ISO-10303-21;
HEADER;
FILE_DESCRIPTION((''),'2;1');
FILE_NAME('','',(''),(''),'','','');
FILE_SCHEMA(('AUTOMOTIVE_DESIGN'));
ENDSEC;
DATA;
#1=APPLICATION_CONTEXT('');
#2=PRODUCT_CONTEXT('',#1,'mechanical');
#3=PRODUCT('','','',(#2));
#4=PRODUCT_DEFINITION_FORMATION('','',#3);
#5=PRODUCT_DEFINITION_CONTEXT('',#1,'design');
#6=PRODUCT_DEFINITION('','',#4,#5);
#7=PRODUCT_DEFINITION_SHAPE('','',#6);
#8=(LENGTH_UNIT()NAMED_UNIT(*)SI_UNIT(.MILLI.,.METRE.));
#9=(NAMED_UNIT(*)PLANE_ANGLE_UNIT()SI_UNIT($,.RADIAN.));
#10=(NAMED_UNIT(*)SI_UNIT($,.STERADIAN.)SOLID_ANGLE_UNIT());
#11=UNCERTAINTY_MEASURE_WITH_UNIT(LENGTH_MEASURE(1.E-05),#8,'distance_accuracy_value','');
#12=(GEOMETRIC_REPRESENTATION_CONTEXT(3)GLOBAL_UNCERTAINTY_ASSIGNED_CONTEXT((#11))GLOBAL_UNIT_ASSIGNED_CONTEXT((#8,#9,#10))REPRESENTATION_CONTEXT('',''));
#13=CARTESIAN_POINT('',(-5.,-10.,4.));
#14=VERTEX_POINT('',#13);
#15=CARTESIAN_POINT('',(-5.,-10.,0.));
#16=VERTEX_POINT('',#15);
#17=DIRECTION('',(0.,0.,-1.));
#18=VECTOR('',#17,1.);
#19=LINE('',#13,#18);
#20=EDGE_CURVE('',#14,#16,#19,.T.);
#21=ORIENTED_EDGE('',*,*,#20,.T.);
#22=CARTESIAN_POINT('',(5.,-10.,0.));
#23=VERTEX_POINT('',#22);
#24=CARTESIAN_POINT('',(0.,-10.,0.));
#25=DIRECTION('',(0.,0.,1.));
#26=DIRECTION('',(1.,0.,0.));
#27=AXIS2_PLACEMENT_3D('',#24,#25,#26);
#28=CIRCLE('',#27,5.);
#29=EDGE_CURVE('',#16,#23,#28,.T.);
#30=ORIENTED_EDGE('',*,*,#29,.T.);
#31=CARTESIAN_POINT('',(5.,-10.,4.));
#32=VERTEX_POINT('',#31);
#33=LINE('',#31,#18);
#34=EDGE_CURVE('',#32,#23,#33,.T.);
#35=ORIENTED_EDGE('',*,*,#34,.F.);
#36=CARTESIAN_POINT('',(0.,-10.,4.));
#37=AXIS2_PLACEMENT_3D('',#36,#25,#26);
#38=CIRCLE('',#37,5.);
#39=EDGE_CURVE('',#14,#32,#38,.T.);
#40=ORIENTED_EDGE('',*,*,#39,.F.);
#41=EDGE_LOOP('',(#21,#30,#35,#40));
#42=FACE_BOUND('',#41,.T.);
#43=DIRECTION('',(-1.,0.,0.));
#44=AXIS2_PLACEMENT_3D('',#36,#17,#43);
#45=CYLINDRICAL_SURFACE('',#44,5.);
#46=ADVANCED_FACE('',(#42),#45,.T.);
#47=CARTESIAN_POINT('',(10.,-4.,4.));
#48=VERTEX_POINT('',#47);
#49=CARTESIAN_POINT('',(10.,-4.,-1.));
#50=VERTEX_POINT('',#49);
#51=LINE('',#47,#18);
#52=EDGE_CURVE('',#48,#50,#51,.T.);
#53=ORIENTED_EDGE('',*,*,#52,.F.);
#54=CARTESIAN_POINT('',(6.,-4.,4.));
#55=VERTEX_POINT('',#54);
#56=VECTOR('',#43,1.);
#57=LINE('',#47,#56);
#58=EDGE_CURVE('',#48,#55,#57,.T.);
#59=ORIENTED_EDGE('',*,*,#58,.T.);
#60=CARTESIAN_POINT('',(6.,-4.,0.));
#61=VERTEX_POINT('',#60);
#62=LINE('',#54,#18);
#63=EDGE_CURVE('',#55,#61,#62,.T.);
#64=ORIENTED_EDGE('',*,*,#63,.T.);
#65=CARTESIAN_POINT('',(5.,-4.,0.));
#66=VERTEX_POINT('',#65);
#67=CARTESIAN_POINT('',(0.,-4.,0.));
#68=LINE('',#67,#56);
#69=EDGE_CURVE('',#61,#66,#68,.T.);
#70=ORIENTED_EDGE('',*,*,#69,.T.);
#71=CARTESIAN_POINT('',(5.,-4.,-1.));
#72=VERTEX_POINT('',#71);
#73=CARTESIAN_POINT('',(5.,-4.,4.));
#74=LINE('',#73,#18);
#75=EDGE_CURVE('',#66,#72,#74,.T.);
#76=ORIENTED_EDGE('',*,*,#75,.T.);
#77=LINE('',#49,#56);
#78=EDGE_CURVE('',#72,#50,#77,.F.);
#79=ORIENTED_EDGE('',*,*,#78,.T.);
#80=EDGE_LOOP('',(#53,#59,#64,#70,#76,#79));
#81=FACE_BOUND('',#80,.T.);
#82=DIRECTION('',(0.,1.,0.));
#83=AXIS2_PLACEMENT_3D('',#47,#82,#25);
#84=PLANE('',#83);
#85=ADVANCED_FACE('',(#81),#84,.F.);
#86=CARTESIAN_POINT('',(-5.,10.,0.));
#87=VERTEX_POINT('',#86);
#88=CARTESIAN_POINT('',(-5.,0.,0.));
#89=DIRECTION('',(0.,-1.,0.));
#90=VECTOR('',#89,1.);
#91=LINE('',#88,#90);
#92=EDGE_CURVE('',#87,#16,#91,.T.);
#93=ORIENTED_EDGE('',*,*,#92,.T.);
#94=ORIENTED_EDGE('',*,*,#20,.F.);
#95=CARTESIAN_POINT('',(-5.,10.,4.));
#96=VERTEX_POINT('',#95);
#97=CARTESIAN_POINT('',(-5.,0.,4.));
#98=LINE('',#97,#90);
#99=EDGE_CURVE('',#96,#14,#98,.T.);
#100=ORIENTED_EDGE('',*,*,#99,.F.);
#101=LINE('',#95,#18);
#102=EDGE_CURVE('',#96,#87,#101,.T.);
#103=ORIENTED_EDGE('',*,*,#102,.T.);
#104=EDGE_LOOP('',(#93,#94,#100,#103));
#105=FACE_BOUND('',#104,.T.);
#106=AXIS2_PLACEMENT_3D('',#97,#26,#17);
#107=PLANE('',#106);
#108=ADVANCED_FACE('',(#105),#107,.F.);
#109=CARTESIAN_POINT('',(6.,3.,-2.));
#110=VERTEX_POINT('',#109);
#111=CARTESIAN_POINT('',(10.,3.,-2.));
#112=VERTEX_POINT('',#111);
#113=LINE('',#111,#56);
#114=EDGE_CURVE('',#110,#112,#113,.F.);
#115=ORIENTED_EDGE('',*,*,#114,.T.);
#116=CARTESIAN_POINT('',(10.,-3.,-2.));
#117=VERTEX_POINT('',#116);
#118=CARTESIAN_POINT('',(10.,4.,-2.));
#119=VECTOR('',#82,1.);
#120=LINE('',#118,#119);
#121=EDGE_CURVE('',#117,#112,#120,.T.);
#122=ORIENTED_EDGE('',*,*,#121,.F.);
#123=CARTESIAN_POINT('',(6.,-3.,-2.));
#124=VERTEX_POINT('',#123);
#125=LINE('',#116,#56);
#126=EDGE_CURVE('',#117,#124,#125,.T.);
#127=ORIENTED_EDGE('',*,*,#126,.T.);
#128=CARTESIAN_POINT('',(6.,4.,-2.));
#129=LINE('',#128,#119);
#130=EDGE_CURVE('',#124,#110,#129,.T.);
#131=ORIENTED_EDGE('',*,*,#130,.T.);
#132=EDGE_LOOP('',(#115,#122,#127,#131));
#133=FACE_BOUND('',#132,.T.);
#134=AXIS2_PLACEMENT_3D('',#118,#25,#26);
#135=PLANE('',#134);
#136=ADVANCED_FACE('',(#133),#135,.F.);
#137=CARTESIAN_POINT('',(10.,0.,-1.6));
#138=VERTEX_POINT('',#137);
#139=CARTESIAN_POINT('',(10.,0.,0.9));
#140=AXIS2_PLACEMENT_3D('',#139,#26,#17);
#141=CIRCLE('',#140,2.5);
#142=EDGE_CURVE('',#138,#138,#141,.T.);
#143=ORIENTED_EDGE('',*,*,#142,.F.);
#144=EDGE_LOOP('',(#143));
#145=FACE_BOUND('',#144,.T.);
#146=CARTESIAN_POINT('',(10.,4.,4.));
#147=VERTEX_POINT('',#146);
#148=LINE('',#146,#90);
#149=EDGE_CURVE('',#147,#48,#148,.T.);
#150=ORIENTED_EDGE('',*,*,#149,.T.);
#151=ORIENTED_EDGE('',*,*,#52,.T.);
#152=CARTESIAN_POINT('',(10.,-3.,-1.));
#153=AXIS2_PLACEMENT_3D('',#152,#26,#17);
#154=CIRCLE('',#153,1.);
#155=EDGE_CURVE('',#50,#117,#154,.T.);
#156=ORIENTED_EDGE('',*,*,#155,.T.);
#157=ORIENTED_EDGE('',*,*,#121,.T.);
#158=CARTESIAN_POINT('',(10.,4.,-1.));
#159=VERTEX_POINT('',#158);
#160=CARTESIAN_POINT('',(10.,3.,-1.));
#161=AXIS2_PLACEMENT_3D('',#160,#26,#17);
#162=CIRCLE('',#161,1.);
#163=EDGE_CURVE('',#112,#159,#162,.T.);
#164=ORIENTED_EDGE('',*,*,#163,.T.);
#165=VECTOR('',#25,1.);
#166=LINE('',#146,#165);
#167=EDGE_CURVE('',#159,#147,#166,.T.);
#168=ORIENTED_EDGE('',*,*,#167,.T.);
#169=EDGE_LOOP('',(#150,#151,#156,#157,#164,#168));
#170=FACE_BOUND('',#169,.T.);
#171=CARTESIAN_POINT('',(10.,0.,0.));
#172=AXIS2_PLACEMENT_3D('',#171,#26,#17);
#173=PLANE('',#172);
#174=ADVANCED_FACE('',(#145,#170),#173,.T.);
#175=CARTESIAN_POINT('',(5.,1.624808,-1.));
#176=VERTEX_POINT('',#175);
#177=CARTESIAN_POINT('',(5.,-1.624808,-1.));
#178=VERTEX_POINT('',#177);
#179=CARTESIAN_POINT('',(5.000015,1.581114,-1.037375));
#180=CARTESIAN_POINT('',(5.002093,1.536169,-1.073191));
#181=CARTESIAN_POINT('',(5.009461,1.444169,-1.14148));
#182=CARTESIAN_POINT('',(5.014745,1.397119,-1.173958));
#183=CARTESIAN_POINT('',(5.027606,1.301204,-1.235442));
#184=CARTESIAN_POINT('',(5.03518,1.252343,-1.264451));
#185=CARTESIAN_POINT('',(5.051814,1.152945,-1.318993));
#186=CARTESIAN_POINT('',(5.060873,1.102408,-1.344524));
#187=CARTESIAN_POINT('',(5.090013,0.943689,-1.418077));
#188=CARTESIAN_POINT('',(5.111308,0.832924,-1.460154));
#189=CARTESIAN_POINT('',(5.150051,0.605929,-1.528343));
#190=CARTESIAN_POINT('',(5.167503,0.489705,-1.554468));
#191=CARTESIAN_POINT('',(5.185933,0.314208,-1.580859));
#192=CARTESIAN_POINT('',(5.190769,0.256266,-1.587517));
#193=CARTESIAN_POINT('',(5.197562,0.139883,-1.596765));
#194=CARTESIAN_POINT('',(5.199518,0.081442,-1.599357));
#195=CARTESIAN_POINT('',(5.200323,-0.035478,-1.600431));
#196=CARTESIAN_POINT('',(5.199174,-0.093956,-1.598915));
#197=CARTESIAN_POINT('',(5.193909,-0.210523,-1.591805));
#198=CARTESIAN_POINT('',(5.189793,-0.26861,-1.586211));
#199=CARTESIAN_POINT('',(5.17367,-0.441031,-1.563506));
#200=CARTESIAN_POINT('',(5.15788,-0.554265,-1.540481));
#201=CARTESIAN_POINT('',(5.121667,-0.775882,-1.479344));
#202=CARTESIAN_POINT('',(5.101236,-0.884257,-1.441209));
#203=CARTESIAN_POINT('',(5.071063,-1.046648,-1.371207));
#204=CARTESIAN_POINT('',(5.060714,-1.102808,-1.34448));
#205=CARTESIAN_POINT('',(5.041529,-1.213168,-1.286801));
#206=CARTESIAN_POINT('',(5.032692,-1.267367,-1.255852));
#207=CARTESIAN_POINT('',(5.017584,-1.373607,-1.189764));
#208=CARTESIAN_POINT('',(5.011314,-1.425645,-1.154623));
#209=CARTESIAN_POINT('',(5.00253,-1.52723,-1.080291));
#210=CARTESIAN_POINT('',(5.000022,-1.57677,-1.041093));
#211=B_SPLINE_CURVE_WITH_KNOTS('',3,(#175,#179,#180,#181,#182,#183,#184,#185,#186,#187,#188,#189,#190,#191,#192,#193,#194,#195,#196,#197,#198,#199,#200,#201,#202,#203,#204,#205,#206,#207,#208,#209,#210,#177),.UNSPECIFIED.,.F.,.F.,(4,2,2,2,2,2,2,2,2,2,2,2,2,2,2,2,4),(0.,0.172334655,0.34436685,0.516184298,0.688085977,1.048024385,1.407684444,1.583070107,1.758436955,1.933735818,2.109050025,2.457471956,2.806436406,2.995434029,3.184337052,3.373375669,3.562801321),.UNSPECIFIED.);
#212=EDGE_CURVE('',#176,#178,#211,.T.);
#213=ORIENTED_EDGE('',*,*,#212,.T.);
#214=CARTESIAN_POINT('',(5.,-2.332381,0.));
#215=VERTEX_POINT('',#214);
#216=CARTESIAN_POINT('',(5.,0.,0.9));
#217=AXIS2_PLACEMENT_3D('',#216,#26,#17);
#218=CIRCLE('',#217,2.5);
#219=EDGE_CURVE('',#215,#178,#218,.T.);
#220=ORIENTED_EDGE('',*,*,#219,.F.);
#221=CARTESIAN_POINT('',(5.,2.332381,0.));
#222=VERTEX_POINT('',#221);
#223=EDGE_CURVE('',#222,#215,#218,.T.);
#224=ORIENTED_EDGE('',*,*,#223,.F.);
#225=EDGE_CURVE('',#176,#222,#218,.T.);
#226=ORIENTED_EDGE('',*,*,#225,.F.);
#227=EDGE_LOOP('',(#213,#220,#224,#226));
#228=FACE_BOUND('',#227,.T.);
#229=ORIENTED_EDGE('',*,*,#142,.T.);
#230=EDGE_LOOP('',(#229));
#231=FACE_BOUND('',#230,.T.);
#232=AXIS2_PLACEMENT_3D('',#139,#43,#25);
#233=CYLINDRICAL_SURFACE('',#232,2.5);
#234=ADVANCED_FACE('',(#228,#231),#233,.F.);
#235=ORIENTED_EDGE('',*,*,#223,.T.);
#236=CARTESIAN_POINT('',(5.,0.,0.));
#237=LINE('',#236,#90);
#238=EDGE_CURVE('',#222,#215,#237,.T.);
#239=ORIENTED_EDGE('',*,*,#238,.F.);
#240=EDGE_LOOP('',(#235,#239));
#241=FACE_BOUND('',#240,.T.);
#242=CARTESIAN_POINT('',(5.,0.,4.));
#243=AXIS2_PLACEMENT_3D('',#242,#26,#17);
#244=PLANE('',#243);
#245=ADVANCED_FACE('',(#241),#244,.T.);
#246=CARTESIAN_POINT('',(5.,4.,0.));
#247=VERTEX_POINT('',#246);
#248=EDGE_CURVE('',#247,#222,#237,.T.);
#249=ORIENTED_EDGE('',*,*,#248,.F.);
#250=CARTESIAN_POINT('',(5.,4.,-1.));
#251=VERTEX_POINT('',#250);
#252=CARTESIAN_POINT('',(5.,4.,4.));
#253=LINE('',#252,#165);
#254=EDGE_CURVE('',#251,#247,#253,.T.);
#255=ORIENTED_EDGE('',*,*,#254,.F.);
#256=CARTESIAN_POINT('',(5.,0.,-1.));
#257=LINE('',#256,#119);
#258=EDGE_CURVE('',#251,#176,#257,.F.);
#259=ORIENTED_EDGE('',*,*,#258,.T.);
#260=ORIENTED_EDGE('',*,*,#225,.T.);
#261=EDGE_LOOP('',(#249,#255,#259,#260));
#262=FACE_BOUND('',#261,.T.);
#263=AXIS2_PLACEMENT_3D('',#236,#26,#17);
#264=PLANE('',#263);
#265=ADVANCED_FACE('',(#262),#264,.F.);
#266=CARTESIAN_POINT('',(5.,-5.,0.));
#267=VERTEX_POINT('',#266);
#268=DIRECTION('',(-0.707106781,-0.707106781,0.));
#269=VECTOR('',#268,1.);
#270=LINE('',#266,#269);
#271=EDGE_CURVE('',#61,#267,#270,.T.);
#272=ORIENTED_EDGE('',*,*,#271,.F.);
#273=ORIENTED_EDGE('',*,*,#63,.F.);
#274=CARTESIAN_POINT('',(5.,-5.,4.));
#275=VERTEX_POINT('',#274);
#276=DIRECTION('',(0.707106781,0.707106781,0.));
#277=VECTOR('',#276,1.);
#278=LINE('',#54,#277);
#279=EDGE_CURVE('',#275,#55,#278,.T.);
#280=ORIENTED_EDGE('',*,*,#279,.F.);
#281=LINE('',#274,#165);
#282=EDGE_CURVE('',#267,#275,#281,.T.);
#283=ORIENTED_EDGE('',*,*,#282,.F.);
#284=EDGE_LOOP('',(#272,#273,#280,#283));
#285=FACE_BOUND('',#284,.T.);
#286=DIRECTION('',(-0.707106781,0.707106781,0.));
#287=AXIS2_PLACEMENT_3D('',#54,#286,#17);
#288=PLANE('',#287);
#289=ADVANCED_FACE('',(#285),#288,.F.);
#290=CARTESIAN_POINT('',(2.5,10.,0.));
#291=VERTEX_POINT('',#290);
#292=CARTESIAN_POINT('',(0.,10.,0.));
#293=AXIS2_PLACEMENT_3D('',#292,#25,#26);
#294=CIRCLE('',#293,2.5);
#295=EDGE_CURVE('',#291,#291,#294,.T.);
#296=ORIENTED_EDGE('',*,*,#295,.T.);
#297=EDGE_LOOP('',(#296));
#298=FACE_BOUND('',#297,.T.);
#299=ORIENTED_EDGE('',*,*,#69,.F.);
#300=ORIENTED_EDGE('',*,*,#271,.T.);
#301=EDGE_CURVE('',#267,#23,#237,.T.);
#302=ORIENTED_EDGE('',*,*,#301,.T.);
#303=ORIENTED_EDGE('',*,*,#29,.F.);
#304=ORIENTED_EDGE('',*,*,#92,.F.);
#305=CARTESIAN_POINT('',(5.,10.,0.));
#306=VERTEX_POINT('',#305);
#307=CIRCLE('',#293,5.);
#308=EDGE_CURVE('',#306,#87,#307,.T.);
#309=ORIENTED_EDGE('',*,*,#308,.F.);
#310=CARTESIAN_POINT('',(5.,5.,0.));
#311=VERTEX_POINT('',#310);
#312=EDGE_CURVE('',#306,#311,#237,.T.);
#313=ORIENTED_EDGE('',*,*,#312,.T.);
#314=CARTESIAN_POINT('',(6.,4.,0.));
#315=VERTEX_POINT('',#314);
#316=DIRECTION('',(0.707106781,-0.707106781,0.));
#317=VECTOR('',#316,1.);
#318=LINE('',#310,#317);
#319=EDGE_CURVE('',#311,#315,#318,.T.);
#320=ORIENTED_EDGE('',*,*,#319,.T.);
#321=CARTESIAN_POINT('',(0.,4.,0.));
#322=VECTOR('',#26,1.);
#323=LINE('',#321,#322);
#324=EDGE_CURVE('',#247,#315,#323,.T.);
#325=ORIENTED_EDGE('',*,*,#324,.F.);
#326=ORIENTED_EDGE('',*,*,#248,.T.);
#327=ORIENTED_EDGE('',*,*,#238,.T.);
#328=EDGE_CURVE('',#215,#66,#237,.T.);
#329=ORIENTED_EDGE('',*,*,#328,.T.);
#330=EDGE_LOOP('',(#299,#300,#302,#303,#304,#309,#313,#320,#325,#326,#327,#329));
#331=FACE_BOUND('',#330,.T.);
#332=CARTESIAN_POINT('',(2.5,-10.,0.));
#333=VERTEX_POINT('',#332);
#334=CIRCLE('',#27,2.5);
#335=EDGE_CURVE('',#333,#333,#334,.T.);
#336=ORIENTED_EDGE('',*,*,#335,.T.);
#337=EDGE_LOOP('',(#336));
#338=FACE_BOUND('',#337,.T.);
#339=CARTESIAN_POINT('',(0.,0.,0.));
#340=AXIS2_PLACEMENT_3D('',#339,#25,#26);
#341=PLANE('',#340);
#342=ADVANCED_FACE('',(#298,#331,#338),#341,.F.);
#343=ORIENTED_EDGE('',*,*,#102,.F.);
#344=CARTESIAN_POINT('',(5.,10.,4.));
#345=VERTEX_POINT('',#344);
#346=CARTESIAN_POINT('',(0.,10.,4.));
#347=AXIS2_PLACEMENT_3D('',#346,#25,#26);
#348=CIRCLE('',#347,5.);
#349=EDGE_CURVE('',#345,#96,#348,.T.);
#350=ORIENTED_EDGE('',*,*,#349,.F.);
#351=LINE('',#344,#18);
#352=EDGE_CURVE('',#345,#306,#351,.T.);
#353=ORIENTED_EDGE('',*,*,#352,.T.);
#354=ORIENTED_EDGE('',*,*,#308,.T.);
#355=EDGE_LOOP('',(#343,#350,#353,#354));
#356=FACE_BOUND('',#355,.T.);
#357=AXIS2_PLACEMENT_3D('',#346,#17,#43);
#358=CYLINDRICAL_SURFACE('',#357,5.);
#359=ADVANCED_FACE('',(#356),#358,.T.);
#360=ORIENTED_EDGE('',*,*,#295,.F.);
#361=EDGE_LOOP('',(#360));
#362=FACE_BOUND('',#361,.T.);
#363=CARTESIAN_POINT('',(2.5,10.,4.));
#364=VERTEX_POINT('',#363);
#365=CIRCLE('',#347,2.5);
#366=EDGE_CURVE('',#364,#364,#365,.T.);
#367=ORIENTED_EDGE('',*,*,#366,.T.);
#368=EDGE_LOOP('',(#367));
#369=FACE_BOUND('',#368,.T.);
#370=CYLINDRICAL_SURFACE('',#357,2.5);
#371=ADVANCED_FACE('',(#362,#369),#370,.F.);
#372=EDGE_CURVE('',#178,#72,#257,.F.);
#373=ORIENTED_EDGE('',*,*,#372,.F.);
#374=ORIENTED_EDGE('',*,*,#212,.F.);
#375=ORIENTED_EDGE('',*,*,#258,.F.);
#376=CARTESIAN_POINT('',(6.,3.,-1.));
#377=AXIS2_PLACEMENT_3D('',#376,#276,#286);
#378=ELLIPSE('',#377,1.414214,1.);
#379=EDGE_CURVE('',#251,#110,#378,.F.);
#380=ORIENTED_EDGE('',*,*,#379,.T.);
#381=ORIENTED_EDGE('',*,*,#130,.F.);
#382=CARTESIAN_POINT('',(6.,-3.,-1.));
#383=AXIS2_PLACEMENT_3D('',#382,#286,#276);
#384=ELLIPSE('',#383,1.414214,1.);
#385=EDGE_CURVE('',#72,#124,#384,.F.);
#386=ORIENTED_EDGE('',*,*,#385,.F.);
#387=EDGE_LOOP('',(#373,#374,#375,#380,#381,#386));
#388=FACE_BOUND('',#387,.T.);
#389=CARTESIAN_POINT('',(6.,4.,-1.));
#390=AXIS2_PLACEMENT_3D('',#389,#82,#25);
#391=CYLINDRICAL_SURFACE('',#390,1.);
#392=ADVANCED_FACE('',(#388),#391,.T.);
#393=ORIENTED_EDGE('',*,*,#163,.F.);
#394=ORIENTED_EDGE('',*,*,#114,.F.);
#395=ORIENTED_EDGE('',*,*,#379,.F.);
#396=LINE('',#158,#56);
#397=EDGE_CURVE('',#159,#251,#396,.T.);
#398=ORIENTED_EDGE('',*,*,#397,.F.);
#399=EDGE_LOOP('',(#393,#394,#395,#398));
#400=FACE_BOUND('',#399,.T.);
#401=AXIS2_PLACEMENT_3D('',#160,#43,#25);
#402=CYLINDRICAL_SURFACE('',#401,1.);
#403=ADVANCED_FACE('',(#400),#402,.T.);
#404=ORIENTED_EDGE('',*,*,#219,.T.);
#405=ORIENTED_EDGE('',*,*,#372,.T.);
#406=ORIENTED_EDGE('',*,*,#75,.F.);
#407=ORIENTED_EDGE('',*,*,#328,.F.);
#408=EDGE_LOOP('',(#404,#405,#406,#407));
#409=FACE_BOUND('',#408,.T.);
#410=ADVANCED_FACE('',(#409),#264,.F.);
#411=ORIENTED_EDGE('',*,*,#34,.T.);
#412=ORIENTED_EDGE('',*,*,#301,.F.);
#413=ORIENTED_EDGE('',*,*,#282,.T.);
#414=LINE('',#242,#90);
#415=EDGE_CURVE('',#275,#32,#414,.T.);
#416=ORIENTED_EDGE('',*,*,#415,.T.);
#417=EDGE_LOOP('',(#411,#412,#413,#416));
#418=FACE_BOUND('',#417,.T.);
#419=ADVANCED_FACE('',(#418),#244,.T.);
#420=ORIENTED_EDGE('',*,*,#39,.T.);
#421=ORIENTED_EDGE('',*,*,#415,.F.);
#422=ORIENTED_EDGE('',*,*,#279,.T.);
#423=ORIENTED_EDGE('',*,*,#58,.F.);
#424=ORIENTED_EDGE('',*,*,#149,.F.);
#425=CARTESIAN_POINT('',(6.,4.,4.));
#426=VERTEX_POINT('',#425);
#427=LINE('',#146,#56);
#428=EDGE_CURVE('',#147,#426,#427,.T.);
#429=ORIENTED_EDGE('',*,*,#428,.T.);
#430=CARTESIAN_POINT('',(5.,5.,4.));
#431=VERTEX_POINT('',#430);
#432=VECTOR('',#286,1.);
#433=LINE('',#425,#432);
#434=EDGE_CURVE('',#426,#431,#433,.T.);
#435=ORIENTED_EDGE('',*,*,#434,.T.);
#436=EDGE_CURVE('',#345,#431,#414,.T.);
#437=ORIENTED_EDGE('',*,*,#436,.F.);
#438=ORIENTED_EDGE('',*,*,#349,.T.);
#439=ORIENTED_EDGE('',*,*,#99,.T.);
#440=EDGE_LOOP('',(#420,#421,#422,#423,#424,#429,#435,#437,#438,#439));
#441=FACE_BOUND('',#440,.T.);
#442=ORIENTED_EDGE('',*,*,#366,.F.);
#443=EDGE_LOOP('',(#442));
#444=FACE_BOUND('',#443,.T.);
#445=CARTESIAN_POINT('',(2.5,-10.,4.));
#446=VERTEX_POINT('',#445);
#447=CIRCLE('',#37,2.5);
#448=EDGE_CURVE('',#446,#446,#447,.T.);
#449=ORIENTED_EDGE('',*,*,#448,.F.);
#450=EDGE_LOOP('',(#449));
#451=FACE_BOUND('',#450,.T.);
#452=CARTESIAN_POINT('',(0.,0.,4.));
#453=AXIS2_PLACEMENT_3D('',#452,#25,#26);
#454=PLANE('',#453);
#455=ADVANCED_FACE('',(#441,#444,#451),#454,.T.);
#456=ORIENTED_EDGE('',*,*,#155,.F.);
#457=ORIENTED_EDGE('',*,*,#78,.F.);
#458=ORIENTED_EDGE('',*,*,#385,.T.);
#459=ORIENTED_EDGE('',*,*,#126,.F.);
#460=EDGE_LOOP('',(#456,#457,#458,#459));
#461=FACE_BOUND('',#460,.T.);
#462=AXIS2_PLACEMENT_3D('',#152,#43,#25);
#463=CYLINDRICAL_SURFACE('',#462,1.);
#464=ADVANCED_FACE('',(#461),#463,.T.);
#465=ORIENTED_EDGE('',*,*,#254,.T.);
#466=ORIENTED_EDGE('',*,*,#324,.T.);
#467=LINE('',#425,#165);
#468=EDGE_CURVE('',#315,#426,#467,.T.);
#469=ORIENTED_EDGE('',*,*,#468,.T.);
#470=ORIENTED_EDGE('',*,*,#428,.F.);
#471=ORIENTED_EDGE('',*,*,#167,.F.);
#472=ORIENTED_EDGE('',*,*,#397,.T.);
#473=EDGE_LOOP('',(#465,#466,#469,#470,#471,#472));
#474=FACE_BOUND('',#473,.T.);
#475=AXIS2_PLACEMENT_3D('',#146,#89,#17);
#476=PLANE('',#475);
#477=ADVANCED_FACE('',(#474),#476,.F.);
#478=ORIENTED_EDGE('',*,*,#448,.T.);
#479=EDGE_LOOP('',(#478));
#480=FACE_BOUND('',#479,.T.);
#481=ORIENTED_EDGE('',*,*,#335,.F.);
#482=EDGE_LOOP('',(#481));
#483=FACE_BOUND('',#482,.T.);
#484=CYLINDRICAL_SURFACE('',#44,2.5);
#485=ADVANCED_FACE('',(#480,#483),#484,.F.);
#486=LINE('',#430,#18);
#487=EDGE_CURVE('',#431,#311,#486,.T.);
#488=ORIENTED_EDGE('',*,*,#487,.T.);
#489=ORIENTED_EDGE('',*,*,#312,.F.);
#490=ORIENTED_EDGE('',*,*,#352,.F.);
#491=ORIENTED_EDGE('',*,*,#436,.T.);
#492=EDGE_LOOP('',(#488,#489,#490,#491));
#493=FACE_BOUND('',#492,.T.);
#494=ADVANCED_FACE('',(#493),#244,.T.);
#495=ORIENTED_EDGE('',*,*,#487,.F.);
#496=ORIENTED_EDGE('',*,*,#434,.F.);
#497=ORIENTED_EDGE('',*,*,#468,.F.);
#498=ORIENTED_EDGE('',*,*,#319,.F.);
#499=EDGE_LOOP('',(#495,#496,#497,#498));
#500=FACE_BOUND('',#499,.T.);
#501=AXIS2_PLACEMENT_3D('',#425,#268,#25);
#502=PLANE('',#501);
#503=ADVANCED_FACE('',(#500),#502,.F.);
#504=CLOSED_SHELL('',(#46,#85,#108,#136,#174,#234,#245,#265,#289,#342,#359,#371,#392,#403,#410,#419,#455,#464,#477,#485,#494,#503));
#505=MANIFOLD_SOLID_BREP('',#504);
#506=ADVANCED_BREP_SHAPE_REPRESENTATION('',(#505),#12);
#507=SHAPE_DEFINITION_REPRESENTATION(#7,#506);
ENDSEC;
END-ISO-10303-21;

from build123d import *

# Parameters (mm, degrees)
SKETCH_1_R      = 2.5
EXTRUDE_1_DEPTH = 4
SKETCH_2_W      = 6
SKETCH_2_H      = 8
SKETCH_2_R      = 2.5
EXTRUDE_2_DEPTH = 5
CHAMFER_1_SIZE  = 1
FILLET_1_R      = 1


with BuildPart() as part:
    # 草图1 → 凸台-拉伸1 (new body)
    with BuildSketch(Plane.XY):
        with BuildLine():
            Line((5, 10), (5, -10))
            ThreePointArc((5, -10), (0, -15), (-5, -10))
            Line((-5, -10), (-5, 10))
            ThreePointArc((-5, 10), (0, 15), (5, 10))
        make_face()
        with Locations((0, 10)):
            Circle(SKETCH_1_R, mode=Mode.SUBTRACT)
        with Locations((0, -10)):
            Circle(SKETCH_1_R, mode=Mode.SUBTRACT)
    extrude(amount=EXTRUDE_1_DEPTH)

    # 草图2 → 凸台-拉伸2 (add)
    with BuildSketch(Plane(origin=(5, 0, 0), x_dir=(0, 0, -1), z_dir=(1, 0, 0))):
        with Locations((-1, 0)):
            Rectangle(SKETCH_2_W, SKETCH_2_H)
        with Locations(Location((-0.9, 0, 0), (0, 0, 68.899803976))):
            Circle(SKETCH_2_R, mode=Mode.SUBTRACT)
    extrude(amount=EXTRUDE_2_DEPTH)

    # 倒角1
    chamfer_1_edges = [part.edges().sort_by_distance(p)[0] for p in [
        (5, -4, 2),
        (5, 4, 2),
    ]]
    chamfer(chamfer_1_edges, length=CHAMFER_1_SIZE)

    # 圆角1
    # the kernel refuses this fillet: 1 mm, written as the material it takes off along each edge
    with BuildSketch(Plane(origin=(5, 6.5, -2), x_dir=(0, 0, 1), z_dir=(0, -1, 0))) as fillet_1_piece_1:
        with BuildLine():
            CenterArc((FILLET_1_R, -FILLET_1_R), FILLET_1_R, 90, 90)
            Line((0, -FILLET_1_R), (0, 0))
            Line((0, 0), (FILLET_1_R, 0))
        make_face()
    extrude(amount=13, mode=Mode.SUBTRACT)
    with BuildSketch(Plane(origin=(2.5, -4, -2), x_dir=(0, 0, 1), z_dir=(1, 0, 0))) as fillet_1_piece_2:
        with BuildLine():
            CenterArc((FILLET_1_R, -FILLET_1_R), FILLET_1_R, 90, 90)
            Line((0, -FILLET_1_R), (0, 0))
            Line((0, 0), (FILLET_1_R, 0))
        make_face()
    extrude(amount=10, mode=Mode.SUBTRACT)
    with BuildSketch(Plane(origin=(2.5, 4, -2), x_dir=(0, 0, 1), z_dir=(1, 0, 0))) as fillet_1_piece_3:
        with BuildLine():
            CenterArc((FILLET_1_R, FILLET_1_R), FILLET_1_R, 180, 90)
            Line((0, FILLET_1_R), (0, 0))
            Line((0, 0), (FILLET_1_R, 0))
        make_face()
    extrude(amount=10, mode=Mode.SUBTRACT)


solid = part.part
